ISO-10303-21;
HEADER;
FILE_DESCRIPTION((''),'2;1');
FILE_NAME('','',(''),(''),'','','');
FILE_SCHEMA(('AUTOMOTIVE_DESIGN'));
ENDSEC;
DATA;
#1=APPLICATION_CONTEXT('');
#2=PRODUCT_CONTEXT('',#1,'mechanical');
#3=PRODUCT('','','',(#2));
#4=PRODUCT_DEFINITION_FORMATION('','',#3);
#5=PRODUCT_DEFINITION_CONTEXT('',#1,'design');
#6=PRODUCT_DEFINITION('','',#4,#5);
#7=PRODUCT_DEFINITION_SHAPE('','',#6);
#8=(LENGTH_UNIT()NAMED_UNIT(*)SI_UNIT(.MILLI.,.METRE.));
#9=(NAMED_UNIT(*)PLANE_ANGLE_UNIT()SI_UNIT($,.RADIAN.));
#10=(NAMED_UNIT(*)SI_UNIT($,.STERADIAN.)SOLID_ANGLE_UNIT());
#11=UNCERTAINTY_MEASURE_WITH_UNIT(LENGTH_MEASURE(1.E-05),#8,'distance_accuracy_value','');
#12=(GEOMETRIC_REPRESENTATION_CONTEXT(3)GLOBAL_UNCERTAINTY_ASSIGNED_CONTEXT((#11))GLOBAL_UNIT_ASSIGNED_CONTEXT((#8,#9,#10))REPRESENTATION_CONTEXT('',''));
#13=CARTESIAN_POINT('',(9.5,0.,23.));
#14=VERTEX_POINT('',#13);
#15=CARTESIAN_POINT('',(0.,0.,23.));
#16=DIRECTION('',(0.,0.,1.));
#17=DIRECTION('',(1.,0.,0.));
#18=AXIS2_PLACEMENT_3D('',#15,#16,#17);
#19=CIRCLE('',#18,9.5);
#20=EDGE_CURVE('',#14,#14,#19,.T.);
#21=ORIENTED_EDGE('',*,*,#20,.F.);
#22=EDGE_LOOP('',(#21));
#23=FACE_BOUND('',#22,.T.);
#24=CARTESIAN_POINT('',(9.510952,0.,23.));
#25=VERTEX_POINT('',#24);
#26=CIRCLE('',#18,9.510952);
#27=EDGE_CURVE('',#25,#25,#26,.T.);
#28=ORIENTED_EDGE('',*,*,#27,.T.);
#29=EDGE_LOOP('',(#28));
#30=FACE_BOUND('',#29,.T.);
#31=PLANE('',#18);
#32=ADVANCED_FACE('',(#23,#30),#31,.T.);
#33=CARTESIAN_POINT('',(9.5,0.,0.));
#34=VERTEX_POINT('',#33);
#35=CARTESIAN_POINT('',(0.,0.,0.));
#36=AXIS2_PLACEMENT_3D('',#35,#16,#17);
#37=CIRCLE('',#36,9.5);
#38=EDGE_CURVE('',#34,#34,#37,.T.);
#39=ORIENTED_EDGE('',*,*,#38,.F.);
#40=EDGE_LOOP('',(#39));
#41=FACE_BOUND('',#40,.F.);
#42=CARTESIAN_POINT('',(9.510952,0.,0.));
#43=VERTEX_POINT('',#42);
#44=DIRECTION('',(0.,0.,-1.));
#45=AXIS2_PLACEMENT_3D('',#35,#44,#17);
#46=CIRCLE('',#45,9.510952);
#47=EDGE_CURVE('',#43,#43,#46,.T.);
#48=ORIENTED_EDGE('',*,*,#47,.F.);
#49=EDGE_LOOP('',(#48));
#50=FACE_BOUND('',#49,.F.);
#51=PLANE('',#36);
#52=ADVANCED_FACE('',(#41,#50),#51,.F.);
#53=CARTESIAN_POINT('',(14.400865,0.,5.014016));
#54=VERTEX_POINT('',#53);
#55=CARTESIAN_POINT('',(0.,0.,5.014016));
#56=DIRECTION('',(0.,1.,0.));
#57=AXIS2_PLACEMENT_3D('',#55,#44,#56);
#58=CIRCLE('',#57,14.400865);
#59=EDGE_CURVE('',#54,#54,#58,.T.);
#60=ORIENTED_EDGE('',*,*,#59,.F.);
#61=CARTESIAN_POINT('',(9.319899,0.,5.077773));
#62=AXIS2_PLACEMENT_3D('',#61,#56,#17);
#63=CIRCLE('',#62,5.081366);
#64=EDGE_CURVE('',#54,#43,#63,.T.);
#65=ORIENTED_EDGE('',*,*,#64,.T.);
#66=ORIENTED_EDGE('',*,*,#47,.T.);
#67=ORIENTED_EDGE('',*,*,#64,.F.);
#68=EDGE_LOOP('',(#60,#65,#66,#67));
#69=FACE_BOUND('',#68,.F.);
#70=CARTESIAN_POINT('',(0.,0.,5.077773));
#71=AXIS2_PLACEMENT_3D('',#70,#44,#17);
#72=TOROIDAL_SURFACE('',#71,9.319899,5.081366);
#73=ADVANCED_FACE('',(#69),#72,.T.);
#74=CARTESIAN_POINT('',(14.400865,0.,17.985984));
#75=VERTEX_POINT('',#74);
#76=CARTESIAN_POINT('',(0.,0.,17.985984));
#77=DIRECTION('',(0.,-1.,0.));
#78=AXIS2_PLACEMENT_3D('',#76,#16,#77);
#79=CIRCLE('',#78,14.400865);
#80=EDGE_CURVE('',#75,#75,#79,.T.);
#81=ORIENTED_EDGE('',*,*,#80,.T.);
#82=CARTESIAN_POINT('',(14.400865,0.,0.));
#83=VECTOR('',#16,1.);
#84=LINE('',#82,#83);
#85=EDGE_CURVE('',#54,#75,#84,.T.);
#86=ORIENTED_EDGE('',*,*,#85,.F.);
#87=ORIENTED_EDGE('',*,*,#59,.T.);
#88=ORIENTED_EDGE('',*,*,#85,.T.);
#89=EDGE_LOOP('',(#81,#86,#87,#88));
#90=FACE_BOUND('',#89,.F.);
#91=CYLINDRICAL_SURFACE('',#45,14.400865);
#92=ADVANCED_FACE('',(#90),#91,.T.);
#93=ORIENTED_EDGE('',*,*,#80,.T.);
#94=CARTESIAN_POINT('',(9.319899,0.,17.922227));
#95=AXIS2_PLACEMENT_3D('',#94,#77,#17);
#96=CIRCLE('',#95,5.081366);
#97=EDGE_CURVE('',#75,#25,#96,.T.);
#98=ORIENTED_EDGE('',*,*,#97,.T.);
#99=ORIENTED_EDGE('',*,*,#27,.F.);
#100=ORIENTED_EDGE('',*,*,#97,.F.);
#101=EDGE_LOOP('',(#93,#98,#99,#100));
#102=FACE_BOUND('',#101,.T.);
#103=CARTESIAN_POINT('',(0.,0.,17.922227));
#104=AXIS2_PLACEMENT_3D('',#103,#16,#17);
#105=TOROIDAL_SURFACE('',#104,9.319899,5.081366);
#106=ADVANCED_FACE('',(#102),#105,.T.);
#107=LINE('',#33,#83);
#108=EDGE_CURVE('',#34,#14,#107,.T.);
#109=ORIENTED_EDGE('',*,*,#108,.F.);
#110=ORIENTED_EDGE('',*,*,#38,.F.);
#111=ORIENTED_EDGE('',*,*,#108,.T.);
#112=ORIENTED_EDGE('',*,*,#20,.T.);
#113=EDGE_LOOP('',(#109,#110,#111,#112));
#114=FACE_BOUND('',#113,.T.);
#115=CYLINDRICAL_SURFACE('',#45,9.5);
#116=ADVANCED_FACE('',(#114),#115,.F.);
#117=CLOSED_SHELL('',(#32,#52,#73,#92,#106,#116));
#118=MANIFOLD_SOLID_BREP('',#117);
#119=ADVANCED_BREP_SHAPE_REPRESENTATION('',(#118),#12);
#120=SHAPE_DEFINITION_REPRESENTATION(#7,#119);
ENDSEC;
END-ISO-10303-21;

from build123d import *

# Parameters (mm, degrees)
F0_R     = 14.400864616
F0_R_2   = 9.5
F1_DEPTH = 23


# Not quite as in the source:
# - a fillet or chamfer that OpenCascade refuses, or shapes differently, is made with other operations: its cross-section is extruded or revolved along the edge and cut away or added


with BuildPart() as f1:
    # F0 (on Top) → F1 (new body)
    with BuildSketch(Plane.XY):
        Circle(F0_R)
        Circle(F0_R_2, mode=Mode.SUBTRACT)
    extrude(amount=F1_DEPTH)

    # F2: fillet of radius 5.08 on 3 edges, made by hand

    # F2_s1 → F2_t2 (revolve, cut)
    with BuildSketch(Plane.XZ):
        with BuildLine():
            ThreePointArc((14.401264616, 5.0777727304), (12.976092899, 1.5489594887), (9.5000141785, -0.0003997486))
            Line((9.5000141785, -0.0003997486), (9.5180257033, -0.5082169965))
            ThreePointArc((9.5180257033, -0.5082169965), (11.9504393973, -0.5081365685), (14.400864616, -0.5081365685))
            Line((14.400864616, -0.5081365685), (14.9090011846, 0))
            ThreePointArc((14.9090011846, 0), (14.9090011846, 2.5388863652), (14.9094011846, 5.0777727304))
            Line((14.9094011846, 5.0777727304), (14.401264616, 5.0777727304))
        make_face()
    revolve(axis=Axis((0, 0, 0), (0, 0, 1)), mode=Mode.SUBTRACT)

    # F2_s3 → F2_t4 (revolve, cut)
    with BuildSketch(Plane.XZ):
        with BuildLine():
            ThreePointArc((14.401264616, 17.9222272696), (12.976092899, 21.4510405113), (9.5000141785, 23.0003997486))
            Line((9.5000141785, 23.0003997486), (9.5180257033, 23.5082169965))
            ThreePointArc((9.5180257033, 23.5082169965), (11.9504393973, 23.5081365685), (14.400864616, 23.5081365685))
            Line((14.400864616, 23.5081365685), (14.9090011846, 23))
            ThreePointArc((14.9090011846, 23), (14.9090011846, 20.4611136348), (14.9094011846, 17.9222272696))
            Line((14.9094011846, 17.9222272696), (14.401264616, 17.9222272696))
        make_face()
    revolve(axis=Axis((0, 0, 23), (0, 0, 1)), mode=Mode.SUBTRACT)


solid = f1.part
